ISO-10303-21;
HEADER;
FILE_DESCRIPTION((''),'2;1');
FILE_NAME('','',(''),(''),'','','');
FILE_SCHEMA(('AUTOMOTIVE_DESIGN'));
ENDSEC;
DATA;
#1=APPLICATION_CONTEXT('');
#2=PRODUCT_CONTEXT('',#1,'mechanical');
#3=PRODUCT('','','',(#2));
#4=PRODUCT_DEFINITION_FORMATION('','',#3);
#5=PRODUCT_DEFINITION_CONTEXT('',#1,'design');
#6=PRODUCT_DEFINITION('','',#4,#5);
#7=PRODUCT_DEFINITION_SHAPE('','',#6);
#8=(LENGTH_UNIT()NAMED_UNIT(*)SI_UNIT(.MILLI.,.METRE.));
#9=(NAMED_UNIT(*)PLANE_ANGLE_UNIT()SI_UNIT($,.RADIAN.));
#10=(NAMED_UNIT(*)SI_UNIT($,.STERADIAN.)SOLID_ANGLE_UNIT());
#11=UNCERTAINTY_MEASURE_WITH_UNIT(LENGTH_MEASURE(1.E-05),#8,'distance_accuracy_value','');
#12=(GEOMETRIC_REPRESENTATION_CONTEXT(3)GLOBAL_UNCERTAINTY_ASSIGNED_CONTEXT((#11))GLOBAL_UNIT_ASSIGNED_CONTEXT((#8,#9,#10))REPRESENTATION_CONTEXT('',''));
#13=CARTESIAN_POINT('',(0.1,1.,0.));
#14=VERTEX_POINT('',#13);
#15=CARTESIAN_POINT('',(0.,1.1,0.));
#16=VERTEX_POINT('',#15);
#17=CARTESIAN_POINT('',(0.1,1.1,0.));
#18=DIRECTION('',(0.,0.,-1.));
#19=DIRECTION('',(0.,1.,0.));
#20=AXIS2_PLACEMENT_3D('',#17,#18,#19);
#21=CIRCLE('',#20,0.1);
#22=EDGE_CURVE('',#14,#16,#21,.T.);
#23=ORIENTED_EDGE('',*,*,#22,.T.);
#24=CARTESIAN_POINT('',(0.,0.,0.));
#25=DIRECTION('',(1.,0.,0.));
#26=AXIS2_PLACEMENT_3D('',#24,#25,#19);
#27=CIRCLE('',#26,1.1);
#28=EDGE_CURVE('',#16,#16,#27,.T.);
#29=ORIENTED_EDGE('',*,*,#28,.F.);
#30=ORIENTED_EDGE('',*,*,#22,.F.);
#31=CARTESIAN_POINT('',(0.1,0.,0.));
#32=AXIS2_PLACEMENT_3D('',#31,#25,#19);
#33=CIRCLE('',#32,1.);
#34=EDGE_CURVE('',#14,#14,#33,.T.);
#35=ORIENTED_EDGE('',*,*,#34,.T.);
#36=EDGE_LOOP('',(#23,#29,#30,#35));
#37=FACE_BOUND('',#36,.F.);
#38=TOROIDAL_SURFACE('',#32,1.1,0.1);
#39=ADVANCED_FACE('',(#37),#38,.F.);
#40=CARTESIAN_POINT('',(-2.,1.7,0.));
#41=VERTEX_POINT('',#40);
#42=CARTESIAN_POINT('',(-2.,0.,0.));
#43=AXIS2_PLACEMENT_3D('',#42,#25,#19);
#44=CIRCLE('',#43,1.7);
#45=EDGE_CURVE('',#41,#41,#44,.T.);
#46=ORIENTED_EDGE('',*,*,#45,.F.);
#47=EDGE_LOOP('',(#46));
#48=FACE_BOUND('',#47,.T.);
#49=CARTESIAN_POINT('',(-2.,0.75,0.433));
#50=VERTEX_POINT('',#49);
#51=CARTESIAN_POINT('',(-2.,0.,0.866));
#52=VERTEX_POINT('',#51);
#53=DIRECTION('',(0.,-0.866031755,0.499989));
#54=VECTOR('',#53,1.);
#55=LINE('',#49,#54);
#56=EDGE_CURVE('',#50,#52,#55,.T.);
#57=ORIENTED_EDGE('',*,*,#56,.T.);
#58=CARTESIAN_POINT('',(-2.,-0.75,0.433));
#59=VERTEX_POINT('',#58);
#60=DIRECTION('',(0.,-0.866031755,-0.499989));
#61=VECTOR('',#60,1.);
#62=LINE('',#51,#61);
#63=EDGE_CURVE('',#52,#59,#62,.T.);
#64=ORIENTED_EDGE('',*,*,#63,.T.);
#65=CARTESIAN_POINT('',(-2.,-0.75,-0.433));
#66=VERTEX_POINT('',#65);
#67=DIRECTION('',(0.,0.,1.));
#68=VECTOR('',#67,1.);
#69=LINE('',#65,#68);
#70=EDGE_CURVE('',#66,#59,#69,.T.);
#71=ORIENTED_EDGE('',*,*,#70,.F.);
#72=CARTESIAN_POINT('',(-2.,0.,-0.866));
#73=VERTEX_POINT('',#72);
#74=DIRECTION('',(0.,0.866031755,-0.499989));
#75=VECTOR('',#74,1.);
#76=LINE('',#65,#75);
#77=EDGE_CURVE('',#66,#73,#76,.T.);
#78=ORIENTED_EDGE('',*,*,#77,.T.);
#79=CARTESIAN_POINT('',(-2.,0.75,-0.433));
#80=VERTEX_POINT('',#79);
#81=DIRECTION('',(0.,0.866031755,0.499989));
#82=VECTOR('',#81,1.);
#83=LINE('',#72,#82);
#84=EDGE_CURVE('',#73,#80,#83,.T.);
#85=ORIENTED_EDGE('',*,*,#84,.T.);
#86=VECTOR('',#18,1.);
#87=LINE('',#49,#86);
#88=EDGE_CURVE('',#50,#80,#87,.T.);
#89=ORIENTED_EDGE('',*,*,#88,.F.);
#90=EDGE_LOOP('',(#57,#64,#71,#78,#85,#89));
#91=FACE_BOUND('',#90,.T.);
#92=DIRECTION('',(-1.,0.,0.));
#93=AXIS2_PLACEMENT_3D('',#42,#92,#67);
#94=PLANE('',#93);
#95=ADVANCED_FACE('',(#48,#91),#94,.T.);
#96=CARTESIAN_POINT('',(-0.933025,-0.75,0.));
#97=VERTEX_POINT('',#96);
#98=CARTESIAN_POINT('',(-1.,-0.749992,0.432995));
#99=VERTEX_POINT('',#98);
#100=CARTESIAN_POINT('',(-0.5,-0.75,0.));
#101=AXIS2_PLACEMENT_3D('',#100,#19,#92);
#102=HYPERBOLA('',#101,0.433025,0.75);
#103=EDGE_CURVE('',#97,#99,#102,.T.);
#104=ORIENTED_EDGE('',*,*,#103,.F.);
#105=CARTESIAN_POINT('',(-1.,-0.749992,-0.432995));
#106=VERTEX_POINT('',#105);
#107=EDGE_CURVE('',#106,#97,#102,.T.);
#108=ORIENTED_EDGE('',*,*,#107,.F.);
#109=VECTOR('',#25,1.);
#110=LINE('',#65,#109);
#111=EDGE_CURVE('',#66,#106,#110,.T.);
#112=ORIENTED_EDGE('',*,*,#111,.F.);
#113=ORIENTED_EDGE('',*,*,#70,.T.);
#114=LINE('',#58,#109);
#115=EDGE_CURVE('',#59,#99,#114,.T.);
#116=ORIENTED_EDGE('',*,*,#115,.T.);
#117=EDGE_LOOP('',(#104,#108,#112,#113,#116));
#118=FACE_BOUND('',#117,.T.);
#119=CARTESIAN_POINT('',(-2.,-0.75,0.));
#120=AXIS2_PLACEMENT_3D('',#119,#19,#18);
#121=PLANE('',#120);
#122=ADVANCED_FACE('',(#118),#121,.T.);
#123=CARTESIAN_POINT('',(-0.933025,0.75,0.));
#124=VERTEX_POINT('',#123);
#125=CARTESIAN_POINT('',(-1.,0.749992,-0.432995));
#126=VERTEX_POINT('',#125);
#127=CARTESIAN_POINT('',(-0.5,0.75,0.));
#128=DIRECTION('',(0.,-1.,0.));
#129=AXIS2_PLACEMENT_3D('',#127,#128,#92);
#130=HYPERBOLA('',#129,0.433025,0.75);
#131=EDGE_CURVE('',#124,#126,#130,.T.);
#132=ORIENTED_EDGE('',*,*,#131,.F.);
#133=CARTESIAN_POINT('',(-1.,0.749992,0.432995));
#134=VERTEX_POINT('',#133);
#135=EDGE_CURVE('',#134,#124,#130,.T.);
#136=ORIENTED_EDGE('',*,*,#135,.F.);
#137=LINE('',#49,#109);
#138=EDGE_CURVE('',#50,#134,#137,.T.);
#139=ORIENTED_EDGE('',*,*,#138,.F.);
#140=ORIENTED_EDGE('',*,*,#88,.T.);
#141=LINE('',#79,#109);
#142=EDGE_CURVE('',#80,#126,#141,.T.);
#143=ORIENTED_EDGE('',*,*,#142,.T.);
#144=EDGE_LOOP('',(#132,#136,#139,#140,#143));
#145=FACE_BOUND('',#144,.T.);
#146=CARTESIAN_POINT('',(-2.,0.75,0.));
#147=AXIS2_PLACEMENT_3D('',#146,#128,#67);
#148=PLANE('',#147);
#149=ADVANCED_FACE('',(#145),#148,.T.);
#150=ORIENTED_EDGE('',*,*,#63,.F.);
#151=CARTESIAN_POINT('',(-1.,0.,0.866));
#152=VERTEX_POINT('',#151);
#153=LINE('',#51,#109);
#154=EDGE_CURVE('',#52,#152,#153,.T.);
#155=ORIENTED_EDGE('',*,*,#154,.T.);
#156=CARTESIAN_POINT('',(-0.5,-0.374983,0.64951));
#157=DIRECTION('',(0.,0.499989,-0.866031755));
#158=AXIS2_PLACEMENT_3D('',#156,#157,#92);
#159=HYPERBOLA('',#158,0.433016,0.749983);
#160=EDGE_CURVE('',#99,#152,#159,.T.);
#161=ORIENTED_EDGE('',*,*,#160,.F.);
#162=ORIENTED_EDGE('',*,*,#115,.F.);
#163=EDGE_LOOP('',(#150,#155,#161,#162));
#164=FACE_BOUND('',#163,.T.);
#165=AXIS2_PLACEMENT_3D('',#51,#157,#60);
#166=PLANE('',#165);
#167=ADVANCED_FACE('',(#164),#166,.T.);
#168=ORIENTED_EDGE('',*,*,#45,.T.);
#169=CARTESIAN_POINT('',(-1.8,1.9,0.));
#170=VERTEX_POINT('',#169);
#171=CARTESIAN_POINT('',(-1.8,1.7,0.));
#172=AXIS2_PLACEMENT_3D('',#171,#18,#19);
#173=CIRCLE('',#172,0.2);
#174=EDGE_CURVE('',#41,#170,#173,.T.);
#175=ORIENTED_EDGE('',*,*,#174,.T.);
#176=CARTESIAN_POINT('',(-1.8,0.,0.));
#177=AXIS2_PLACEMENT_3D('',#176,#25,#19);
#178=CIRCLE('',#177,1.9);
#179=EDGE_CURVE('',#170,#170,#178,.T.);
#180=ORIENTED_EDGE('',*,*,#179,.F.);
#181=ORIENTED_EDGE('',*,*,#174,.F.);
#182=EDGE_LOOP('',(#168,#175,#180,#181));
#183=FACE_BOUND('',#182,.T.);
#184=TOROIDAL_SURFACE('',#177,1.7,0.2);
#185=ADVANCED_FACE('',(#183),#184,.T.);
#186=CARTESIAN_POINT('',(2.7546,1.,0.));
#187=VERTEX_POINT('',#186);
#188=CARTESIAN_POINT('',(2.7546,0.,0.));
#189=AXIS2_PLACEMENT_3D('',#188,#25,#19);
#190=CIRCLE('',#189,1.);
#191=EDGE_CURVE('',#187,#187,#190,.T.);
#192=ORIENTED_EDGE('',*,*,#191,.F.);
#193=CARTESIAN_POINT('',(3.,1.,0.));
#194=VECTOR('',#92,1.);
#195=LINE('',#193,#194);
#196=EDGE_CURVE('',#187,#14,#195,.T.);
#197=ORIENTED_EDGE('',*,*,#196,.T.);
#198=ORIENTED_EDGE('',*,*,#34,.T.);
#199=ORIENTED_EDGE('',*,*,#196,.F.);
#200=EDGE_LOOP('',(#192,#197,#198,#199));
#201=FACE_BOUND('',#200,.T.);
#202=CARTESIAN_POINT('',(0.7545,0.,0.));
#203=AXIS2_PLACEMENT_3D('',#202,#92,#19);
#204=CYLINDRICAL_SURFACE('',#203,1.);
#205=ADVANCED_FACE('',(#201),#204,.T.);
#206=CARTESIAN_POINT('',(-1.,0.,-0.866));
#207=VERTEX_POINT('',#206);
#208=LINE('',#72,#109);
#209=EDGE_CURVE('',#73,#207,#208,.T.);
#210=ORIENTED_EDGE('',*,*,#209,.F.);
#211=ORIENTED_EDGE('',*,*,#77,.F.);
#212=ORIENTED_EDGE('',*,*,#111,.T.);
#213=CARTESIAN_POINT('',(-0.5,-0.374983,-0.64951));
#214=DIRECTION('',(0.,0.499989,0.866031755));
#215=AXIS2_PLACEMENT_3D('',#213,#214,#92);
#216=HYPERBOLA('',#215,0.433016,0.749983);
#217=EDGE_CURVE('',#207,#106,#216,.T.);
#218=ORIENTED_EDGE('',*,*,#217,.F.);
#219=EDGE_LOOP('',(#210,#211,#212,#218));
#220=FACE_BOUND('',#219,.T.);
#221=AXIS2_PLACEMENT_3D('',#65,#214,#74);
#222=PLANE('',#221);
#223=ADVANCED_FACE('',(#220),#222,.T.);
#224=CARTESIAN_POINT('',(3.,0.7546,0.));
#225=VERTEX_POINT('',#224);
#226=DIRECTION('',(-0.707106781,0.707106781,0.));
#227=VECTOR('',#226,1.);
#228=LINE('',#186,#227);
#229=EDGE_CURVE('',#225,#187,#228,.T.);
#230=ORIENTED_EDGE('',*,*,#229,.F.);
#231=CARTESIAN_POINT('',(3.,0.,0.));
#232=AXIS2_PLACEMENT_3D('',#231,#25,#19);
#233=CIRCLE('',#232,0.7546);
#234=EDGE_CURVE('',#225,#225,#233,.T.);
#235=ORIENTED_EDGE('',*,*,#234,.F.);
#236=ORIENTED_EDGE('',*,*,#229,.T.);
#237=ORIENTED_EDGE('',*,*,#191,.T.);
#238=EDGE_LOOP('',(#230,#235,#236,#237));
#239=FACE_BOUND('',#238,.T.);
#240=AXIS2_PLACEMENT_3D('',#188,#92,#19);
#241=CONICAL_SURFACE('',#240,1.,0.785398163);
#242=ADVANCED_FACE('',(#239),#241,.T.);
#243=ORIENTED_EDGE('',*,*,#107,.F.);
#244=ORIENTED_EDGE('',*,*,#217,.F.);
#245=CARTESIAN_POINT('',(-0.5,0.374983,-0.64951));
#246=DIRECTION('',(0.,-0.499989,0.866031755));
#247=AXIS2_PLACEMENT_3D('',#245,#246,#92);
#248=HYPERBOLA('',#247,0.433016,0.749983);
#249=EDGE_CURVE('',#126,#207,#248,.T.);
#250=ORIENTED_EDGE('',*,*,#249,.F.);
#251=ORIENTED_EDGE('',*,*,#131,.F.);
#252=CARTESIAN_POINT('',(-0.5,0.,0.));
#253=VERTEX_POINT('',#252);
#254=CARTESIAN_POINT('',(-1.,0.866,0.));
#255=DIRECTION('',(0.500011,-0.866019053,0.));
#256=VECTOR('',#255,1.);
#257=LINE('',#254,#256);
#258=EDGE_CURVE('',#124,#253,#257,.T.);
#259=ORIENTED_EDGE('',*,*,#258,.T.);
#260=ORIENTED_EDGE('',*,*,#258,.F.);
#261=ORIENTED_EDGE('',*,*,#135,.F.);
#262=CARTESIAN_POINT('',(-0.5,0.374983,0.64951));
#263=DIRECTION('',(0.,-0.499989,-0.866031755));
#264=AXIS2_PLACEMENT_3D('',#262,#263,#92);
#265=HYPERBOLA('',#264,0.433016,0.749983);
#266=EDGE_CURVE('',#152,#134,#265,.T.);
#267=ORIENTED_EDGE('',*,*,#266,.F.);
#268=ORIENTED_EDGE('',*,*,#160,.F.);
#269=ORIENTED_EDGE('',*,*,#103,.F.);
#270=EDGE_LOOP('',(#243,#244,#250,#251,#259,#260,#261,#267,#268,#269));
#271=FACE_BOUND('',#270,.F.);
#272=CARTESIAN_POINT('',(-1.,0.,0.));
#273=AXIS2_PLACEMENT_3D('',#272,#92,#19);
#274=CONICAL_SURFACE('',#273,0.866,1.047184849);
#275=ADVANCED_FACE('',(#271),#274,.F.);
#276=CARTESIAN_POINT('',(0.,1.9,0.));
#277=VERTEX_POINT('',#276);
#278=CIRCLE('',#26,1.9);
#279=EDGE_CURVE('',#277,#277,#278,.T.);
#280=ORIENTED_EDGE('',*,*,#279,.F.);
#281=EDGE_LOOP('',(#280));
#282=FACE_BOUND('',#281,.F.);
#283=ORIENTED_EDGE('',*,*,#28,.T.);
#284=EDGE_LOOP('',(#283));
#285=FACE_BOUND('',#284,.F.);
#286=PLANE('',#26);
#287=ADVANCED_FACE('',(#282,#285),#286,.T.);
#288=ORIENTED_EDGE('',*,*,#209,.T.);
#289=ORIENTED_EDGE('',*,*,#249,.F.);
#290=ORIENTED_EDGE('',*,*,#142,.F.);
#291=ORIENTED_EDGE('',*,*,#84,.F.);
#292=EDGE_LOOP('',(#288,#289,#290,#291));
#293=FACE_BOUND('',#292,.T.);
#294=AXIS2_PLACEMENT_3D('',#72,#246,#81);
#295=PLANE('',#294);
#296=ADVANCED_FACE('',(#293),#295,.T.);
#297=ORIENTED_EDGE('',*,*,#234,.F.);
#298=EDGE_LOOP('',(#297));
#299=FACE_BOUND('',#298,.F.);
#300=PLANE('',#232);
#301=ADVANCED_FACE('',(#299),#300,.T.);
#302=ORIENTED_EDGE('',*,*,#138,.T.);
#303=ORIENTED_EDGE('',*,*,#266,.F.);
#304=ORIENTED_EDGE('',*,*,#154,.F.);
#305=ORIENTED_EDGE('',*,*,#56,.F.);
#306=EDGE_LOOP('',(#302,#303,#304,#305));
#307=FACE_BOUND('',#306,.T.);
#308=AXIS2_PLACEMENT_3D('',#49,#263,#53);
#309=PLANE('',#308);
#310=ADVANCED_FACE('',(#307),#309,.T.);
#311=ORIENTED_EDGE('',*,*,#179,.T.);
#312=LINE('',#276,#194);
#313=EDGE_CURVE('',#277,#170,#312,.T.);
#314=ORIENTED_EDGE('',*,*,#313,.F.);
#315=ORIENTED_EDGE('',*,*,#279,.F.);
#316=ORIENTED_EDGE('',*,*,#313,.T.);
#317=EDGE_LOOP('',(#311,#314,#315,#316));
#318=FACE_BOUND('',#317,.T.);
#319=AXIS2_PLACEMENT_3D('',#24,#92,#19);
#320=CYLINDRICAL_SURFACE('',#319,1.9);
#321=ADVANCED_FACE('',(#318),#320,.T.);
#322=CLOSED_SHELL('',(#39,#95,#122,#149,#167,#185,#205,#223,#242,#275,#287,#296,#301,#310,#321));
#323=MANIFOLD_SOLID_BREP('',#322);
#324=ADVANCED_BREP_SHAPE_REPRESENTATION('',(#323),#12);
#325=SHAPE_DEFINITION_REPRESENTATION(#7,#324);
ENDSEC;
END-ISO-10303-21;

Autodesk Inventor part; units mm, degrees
ref_plane "YZ Plane" through (0, 0, 0) normal (1, 0, 0) x (0, 1, 0)
ref_plane "XZ Plane" through (0, 0, 0) normal (0, 1, 0) x (-1, 0, 0)
sketch "스케치1" plane through (0, 0, 0) normal (0, 0, 1) x (1, 0, 0)
  line L0 (-0.5, 0) -> (3, 0)
  line L1 (3, 0) -> (3, 1)
  line L2 (3, 1) -> (1, 1)
  line L3 (1, 1) -> (0.7545, 1)
  line L4 (0.7545, 1) -> (0, 1)
  line L5 (0, 1) -> (0, 1.9)
  line L6 (0, 1.9) -> (-2, 1.9)
  line L7 (-2, 1.9) -> (-2, 0.866)
  line L8 (-2, 0.866) -> (-1, 0.866)
  line L9 (-1, 0.866) -> (-0.5, 0)
  line L10 (-3, 0) -> (4, 0) projected
  line L11 (0, -0.38) -> (0, 2.28) projected
  line L12 (1, 1) -> (0, 1) construction
  dimension "d1" = 2
  dimension "d2" = 0.2455
  dimension "d3" = 2
  dimension "d4" = 1
  dimension "d5" = 60
  dimension "d6" = 2
  dimension "d7" = 2
  dimension "d8" = 1.7321
  dimension "d9" = 3.8
  dimension "d26" = 3
revolve "본체" add sketch "스케치1" angle 360 about axis through (-0.5, 0, 0) along (1, 0, 0)
sketch "스케치2" plane through (-2, 0, 0) normal (-1, 0, 0) x (0, 0, 1)
  circle A0 centre (0, 0) radius 0.866 projected
  line L0 (0, -2.66) -> (0, 2.66) projected
  line L1 (-2.66, 0) -> (2.66, 0) projected
  line L2 (0.866, 0) -> (0.433, -0.75)
  line L3 (0.433, -0.75) -> (-0.433, -0.75)
  line L4 (-0.433, -0.75) -> (-0.866, 0)
  line L5 (-0.866, 0) -> (-0.433, 0.75)
  line L6 (-0.433, 0.75) -> (0.433, 0.75)
  line L7 (0.433, 0.75) -> (0.866, 0)
extrude "슬롯" add sketch "스케치2" against normal up to next contours L7 A0 | A0 L2 | L6 L0 A0 | A0 L0 L3 | L0 L6 A0 | A0 L3 L0 | L4 A0 | A0 L5
fillet "모깎기1" radius 0.2 1 edges at (-2, -1.9, 0)
thread "스레드" size "M2x0.4" class "6g" standard "ISO Metric profile" length 2
chamfer "모따기1" distance 0.2454 distance2 0.2454 1 edges at (3, -1, 0) measured on face at (3, -0.4588, -0.3309)
ref_plane "Work Plane1" through (29, 0, 0) normal (0, -1, 0) x (1, 0, 0)
fillet "Fillet2" radius 0.1 1 edges at (0, -1, 0)
equation "\"d1\" = GEL"
equation "\"d3\" = KOH"
equation "\"d4\" = INTI"
equation "\"d6\" = GD"
equation "\"d7\" = BDM"
equation "\"d8\" = 1.1547 * SW"
equation "\"d9\" = KOD"
equation "\"d26\" = NLG"
equation "\"d30\" = R"
equation "\"d17\" = RR"
equation "\"d13\" = GEL"
equation "\"d15\" = -0.5 * SPD + 0.5 * GD"
equation "\"d16\" = GUL"
equation "\"GD\" = NND"
equation "\"NLG\" = 3"
equation "\"GEL\" = 2"
equation "\"KOD\" = 3.8"
equation "\"KOH\" = NND"
equation "\"INTI\" = 1"
equation "\"GAL\" = 0.61345 * PTC"
equation "\"GUL\" = 0.61345 * PTC"
equation "\"BDM\" = NND"
equation "\"SW\" = 1.5"
equation "\"RR\" = 0.1 * NND"
equation "\"SPD\" = NND - 1.2269 * PTC"
equation "\"R\" = 0.1"
equation "\"TOA\" = 30deg"
equation "\"GD1\" = THREADDIA - 1.2269 * PTC"
equation "\"THREADDIA\" = 2"
equation "\"FAWI\" = 45deg"
equation "\"PTC\" = 0.4"
equation "\"NND\" = 2"
equation "\"E0\" = 1.155 * SW"
properties part number "BS 4168 - M2 x 3" material "강철, 연강"
